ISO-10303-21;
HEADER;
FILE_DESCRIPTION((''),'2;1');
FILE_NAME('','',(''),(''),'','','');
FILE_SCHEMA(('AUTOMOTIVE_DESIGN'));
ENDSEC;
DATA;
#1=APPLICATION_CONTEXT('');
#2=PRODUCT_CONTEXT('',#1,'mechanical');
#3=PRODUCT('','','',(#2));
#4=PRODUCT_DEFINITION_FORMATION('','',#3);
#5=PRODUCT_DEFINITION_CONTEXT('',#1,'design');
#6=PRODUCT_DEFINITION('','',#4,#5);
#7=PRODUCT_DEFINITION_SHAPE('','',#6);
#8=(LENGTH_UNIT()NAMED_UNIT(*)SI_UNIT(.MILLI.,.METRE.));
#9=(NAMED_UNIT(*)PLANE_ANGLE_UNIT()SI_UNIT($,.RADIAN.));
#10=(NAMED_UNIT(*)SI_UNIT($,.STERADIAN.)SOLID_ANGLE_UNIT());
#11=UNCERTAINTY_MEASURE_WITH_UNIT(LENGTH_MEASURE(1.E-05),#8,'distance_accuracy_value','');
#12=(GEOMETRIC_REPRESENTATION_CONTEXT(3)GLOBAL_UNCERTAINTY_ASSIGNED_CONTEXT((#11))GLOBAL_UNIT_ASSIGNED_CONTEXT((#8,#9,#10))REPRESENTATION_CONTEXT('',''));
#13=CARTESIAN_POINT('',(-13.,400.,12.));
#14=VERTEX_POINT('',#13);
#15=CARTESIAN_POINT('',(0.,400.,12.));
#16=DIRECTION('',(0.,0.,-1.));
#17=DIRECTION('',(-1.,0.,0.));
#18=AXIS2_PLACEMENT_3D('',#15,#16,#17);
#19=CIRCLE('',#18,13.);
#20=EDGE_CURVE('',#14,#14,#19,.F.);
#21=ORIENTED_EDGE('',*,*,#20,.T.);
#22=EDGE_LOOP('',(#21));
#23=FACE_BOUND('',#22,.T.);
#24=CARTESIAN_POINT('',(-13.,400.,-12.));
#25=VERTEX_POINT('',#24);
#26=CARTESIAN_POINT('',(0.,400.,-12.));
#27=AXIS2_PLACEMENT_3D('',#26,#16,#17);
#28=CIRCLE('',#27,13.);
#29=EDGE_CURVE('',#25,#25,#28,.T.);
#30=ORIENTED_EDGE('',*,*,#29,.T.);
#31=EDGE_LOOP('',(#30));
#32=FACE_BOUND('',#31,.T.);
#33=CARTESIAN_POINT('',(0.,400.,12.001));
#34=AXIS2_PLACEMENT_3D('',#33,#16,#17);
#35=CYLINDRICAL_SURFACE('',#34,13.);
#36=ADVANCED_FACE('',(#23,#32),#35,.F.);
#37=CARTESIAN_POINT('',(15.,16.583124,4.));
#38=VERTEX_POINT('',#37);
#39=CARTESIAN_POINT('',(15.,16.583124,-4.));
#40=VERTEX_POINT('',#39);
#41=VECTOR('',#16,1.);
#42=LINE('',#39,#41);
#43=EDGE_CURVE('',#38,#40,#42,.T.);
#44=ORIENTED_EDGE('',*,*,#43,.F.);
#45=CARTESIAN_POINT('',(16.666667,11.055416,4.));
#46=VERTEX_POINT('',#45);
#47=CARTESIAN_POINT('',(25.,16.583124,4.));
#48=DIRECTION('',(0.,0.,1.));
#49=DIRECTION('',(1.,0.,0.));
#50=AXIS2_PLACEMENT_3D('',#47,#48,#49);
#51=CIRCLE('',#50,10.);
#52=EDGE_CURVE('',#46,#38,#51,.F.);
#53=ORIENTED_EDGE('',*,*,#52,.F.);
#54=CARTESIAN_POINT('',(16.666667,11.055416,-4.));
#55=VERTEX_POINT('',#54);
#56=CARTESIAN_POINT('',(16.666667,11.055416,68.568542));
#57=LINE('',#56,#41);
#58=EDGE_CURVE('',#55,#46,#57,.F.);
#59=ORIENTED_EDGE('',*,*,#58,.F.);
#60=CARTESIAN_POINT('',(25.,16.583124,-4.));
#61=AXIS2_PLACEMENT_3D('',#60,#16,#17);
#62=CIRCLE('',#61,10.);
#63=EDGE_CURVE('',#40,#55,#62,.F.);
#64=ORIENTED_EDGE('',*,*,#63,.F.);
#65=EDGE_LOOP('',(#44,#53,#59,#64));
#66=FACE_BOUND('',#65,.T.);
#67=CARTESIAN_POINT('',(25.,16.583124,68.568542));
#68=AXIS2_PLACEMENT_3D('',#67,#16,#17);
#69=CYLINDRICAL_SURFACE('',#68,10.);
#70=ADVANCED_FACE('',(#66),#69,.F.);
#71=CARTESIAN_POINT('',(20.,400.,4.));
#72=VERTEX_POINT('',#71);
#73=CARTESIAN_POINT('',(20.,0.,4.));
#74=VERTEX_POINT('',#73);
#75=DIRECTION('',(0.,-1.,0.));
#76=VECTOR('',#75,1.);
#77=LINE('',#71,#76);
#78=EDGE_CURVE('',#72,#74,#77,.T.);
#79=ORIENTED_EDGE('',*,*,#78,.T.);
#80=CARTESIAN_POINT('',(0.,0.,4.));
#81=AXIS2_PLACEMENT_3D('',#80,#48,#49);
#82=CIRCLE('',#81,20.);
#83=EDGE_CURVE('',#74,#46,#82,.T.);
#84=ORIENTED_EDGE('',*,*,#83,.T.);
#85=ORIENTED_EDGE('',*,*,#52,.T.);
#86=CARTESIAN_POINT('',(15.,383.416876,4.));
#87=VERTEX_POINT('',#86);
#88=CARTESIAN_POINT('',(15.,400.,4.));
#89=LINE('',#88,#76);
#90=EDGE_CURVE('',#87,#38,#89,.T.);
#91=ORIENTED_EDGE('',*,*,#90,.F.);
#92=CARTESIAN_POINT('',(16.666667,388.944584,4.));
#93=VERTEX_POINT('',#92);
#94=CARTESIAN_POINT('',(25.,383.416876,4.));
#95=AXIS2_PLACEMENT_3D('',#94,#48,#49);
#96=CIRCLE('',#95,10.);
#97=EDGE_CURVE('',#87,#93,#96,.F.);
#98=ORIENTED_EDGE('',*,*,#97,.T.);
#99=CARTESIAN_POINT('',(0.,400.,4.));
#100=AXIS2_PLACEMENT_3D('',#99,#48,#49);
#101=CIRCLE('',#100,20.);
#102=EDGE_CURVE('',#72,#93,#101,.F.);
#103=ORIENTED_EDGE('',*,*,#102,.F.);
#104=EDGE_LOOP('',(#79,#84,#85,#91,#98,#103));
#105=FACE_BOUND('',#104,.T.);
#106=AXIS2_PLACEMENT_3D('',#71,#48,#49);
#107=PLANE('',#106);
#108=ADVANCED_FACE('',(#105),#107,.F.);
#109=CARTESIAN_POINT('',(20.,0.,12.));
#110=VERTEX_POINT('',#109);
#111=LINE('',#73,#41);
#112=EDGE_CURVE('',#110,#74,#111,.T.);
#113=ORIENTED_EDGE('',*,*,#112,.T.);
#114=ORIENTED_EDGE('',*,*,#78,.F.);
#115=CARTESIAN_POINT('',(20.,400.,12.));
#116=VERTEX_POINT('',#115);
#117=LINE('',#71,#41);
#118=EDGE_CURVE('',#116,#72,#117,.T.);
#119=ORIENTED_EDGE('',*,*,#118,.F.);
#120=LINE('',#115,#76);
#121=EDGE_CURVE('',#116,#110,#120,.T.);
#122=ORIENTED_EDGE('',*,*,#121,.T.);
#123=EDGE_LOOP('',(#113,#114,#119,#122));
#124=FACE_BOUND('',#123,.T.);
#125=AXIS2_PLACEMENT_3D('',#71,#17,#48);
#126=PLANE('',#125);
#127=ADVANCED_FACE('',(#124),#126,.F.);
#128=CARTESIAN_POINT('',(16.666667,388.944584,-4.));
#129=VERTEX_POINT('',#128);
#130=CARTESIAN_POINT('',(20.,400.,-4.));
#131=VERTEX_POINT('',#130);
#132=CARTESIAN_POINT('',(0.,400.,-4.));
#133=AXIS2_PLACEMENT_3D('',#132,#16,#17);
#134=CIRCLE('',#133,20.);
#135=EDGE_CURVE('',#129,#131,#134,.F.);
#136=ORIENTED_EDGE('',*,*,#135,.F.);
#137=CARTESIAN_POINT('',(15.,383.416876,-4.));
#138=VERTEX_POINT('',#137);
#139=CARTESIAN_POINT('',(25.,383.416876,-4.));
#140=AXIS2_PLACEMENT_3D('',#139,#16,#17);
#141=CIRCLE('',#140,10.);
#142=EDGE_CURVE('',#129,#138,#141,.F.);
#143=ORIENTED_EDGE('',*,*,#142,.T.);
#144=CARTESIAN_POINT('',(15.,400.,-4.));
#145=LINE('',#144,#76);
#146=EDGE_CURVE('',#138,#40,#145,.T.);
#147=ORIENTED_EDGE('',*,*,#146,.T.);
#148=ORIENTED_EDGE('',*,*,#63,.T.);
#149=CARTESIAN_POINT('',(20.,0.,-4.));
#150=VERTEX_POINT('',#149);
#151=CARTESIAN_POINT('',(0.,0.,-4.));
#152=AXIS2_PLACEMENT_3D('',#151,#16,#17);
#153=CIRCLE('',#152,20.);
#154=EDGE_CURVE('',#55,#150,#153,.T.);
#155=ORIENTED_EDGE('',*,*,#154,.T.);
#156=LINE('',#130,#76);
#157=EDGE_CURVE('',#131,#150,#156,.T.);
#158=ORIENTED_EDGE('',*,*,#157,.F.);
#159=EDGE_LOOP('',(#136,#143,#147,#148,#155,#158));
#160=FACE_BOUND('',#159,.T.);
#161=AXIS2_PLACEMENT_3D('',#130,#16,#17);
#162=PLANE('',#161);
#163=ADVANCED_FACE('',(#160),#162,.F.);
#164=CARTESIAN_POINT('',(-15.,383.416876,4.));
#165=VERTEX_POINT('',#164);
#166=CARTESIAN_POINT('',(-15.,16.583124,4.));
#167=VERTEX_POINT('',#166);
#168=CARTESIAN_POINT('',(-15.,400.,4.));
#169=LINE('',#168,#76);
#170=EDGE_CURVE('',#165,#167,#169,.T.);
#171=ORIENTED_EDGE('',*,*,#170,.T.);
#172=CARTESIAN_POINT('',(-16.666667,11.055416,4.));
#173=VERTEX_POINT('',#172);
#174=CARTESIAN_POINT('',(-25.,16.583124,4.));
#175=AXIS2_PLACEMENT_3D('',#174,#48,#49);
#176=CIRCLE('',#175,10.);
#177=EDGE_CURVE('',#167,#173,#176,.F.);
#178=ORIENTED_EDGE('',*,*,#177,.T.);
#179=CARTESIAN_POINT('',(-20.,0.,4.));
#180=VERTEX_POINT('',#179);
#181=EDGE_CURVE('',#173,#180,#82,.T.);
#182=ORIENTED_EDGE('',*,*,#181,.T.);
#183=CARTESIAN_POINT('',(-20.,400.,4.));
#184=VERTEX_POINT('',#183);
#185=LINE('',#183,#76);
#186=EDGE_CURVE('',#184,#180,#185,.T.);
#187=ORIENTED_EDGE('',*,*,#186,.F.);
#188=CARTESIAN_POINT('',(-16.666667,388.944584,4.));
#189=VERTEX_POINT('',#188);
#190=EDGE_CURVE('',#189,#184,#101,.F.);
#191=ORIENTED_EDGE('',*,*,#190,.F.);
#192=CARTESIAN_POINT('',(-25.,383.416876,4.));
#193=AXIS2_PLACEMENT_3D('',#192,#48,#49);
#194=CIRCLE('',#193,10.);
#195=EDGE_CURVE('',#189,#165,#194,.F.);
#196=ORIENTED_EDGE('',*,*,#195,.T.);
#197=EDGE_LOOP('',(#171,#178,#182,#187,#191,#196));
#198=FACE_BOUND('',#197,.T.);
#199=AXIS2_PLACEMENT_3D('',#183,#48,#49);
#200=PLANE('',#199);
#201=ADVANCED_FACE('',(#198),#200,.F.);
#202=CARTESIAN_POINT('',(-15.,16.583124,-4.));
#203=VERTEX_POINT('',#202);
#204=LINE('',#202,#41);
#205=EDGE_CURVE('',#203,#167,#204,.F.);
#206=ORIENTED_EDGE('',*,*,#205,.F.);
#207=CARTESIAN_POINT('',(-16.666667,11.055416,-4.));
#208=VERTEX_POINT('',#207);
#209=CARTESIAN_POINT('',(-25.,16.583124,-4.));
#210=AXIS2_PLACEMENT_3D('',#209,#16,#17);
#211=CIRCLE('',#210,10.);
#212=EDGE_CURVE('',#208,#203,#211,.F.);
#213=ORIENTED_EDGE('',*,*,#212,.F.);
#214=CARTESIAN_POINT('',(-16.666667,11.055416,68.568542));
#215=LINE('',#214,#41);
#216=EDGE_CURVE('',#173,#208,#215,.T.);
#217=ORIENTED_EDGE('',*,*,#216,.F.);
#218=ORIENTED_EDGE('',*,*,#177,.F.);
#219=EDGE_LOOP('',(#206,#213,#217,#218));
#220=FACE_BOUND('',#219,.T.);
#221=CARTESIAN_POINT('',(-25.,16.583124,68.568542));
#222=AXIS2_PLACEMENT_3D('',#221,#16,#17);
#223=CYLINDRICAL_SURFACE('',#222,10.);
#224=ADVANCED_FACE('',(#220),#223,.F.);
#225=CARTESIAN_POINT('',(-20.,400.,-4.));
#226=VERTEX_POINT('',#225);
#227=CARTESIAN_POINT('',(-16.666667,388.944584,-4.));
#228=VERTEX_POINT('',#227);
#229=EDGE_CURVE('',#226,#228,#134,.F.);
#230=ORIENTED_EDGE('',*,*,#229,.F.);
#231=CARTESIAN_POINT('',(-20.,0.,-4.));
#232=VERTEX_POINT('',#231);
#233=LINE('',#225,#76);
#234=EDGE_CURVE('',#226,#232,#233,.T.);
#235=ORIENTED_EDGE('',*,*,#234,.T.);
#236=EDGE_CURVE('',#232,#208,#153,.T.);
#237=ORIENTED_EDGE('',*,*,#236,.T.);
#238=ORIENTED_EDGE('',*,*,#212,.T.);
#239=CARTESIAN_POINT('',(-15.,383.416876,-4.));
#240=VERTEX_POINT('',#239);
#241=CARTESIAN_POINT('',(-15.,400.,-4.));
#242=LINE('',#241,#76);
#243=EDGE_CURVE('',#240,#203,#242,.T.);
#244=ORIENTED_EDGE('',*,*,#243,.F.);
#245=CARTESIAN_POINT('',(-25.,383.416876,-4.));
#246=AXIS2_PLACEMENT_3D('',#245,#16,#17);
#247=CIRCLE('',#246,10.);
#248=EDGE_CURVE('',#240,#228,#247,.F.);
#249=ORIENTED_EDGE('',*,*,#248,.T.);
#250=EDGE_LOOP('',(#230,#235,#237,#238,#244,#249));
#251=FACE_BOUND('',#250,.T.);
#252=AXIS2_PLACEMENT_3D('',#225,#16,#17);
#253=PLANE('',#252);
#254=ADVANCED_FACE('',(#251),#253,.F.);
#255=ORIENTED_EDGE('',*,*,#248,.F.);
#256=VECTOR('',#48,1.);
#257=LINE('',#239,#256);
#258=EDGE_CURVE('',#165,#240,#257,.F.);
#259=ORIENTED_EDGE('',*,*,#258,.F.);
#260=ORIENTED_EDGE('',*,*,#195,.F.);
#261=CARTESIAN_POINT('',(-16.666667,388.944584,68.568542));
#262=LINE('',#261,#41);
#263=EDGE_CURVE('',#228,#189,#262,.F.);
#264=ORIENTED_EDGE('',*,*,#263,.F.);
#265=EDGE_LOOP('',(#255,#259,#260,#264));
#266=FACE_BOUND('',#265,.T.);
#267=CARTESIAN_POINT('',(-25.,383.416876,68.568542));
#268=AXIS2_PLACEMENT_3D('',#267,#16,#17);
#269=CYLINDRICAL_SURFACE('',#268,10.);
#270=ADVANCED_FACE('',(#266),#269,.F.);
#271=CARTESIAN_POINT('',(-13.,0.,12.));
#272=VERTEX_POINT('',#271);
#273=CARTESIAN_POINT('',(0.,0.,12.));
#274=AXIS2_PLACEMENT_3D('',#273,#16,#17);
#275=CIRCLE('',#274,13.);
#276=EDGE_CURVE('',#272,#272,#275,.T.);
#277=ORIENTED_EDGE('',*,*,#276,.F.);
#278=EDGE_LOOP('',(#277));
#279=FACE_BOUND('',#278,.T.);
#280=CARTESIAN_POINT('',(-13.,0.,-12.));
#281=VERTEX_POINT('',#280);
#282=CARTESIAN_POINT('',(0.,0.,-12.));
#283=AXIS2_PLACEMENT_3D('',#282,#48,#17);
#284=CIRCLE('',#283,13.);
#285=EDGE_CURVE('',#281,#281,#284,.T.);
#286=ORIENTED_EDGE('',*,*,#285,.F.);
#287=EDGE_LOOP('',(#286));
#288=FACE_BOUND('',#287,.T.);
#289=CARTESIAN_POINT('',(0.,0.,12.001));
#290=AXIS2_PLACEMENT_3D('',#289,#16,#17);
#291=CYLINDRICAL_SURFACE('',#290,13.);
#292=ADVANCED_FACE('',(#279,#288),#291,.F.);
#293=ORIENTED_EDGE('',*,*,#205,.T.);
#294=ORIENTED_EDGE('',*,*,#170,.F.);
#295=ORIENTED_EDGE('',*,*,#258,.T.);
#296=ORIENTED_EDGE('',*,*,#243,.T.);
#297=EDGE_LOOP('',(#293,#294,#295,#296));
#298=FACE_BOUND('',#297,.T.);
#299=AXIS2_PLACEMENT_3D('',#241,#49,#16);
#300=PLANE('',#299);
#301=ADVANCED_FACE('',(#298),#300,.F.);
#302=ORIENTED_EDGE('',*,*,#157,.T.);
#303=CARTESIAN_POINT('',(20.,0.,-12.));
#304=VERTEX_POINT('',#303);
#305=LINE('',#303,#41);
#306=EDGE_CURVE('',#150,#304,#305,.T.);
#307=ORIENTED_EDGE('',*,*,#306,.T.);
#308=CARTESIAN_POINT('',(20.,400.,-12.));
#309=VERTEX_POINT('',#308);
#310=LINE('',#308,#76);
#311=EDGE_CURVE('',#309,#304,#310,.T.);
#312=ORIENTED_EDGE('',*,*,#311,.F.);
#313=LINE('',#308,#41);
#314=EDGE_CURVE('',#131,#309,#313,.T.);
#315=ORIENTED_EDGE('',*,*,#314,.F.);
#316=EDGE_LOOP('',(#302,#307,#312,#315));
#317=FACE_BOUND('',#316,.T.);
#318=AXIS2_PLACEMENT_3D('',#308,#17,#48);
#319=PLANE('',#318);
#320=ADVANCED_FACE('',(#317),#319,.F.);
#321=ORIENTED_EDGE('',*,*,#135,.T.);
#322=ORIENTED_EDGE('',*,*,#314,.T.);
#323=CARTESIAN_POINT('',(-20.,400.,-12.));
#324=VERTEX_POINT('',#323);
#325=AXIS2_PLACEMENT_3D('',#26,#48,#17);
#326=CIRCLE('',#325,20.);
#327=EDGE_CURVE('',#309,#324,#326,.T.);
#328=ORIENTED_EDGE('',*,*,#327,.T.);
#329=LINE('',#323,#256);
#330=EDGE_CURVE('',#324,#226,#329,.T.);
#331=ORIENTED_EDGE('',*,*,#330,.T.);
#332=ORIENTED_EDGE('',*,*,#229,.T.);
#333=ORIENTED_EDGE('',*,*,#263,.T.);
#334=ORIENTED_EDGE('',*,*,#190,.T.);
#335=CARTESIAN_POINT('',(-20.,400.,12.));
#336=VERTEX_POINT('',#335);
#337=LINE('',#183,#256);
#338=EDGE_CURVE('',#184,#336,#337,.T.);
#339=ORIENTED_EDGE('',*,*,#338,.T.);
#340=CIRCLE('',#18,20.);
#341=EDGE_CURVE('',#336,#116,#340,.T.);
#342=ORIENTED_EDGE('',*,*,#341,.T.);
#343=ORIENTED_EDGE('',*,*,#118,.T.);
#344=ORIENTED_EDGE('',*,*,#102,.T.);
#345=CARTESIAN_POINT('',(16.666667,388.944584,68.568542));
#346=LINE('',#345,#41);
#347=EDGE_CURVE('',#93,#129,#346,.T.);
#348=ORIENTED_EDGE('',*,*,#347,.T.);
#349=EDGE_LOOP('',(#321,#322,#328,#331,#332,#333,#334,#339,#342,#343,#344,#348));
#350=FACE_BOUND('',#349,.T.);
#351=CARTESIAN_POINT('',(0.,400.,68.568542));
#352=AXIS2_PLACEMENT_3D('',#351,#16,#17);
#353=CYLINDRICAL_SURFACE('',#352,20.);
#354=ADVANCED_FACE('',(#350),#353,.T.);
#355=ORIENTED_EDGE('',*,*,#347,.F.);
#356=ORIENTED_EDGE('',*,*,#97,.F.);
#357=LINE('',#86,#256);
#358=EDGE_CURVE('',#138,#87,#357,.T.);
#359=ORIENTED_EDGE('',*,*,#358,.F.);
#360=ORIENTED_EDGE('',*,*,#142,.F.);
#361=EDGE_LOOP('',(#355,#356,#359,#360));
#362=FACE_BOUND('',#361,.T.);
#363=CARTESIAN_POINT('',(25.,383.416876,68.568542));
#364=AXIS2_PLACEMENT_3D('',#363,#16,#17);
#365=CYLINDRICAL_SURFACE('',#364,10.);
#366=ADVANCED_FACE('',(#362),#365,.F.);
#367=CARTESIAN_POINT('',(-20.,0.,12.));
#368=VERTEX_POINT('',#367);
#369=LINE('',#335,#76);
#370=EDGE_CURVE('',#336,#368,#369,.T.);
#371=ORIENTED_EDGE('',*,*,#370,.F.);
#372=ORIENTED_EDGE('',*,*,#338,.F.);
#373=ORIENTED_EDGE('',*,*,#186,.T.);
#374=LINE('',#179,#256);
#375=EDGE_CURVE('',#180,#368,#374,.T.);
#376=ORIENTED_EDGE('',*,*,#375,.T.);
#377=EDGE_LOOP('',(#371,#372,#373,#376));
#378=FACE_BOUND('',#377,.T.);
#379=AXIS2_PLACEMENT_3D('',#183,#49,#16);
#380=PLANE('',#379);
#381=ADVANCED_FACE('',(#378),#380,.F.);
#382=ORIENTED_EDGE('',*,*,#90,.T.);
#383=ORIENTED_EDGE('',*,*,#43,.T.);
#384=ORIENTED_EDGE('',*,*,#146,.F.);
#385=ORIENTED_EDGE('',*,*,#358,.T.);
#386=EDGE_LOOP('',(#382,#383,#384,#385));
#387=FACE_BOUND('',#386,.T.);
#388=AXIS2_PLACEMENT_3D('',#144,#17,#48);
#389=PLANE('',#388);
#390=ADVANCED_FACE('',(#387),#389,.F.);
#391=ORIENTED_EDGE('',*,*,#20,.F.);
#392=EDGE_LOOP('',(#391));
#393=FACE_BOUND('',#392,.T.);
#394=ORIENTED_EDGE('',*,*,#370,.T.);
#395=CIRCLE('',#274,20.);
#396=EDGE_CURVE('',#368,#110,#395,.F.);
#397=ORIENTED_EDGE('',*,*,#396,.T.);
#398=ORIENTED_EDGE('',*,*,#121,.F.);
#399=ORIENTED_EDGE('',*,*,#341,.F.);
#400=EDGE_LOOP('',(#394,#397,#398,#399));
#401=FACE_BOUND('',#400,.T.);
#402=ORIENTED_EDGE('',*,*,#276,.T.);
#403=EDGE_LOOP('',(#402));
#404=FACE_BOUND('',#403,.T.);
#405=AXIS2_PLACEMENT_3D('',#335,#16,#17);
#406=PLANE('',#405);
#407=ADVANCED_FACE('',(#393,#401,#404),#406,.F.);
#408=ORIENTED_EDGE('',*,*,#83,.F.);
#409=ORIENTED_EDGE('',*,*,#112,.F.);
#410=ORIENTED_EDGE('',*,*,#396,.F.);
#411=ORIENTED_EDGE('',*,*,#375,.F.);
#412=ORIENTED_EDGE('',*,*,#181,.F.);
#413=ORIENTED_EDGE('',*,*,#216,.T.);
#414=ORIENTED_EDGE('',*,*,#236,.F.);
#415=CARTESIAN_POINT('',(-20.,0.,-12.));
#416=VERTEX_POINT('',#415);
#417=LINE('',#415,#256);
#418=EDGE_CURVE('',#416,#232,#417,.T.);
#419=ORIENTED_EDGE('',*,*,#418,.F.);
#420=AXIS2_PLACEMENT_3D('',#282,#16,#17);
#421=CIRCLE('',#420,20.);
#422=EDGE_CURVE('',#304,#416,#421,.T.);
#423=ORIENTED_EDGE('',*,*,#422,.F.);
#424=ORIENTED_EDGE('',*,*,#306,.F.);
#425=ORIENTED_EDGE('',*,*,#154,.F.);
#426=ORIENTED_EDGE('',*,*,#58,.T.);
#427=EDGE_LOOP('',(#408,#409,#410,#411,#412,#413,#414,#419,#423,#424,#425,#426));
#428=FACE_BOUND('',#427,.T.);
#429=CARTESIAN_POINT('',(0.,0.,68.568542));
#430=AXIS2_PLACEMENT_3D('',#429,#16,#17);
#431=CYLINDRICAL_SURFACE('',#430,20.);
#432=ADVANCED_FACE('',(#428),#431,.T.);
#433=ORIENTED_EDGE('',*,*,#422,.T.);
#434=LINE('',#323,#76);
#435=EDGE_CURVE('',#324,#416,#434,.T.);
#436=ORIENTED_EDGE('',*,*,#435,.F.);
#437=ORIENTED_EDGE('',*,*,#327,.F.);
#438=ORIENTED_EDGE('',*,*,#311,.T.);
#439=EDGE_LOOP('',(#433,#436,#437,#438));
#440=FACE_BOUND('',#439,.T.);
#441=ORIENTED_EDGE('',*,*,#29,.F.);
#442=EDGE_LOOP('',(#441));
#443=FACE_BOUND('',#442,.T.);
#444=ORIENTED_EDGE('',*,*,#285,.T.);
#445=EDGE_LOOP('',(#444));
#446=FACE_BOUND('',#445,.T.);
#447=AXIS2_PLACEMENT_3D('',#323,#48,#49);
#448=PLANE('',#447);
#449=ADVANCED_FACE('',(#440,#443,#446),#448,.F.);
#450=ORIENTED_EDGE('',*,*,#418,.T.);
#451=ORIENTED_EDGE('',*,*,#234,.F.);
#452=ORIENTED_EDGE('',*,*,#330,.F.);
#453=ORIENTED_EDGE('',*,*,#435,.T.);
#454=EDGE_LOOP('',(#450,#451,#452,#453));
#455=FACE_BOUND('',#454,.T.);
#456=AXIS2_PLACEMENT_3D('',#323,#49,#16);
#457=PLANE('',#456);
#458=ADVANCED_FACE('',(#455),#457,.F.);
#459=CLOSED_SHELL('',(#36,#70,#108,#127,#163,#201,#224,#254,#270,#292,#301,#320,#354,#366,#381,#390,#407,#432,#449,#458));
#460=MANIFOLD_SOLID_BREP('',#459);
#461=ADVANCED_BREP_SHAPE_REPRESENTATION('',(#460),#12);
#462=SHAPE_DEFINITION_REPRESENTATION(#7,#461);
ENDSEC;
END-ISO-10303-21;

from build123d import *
from build123d.topology import SkipClean

# Parameters (mm, degrees)
BOSS_EXTRUDE1_DEPTH = 400
BOSS_EXTRUDE2_REACH = 403.218
SKETCH2_R           = 20
FILLET1_R           = 10
CUT_EXTRUDE1_REACH  = 423.16
SKETCH3_R           = 13


with BuildPart() as part:
    # Sketch1 → Boss-Extrude1 (new body)
    with BuildSketch(Plane(origin=(0, 0, 0), x_dir=(1, 0, 0), z_dir=(0, 1, 0))):
        Polygon((-20, 12), (20, 12), (20, 4), (15, 4), (15, -4), (20, -4), (20, -12), (-20, -12), (-20, -4), (-15, -4), (-15, 4), (-20, 4), align=None)
    extrude(amount=BOSS_EXTRUDE1_DEPTH)

    # Boss-Extrude2: up to this face of the body (flat: up to its plane)
    boss_extrude2_end = Plane(part.part.faces().sort_by_distance((0, 200, 12))[0])
    # Sketch2 → Boss-Extrude2 (add, up to the picked face)
    with BuildSketch(Plane(origin=(0, 0, -12), x_dir=(-1, 0, 0), z_dir=(0, 0, -1)), mode=Mode.PRIVATE) as boss_extrude2_sk1:
        Circle(SKETCH2_R)
    boss_extrude2_tool1 = split(extrude(boss_extrude2_sk1.sketch, amount=-BOSS_EXTRUDE2_REACH, mode=Mode.PRIVATE), bisect_by=boss_extrude2_end, keep=Keep.BOTH, mode=Mode.PRIVATE)
    boss_extrude2 = boss_extrude2_tool1.solids().sort_by(Axis((0, 0, -12), (0, 0, 1)))[0]
    add(boss_extrude2)

    # Mirror1: Boss-Extrude2 across plane
    with SkipClean():  # the faces are left unmerged after this step: merging them gives an invalid solid
        add(boss_extrude2.mirror(Plane.ZX.offset(200)))
    add(part.part.scale(1), mode=Mode.REPLACE)  # the faces are merged on a copy

    # Fillet1
    fillet1_edges = [part.edges().sort_by_distance(p)[0] for p in [
        (15, 13.228756555, 0),
        (-15, 13.228756555, 0),
        (-15, 386.771243445, 0),
        (15, 386.771243445, 0),
    ]]
    fillet(fillet1_edges, radius=FILLET1_R)

    # Sketch3 → Cut-Extrude1 (cut, up to next)
    with BuildSketch(Plane(origin=(0, 0, -12), x_dir=(-1, 0, 0), z_dir=(0, 0, -1)), mode=Mode.PRIVATE) as cut_extrude1_sk1:
        with Locations((0, 400)):
            Circle(SKETCH3_R)
    cut_extrude1_tool1 = extrude(cut_extrude1_sk1.sketch, amount=-CUT_EXTRUDE1_REACH, mode=Mode.PRIVATE) & part.part
    cut_extrude1 = cut_extrude1_tool1.solids().sort_by_distance((0, 400, -12))[0]
    add(cut_extrude1, mode=Mode.SUBTRACT)

    # Mirror2: Cut-Extrude1 across plane
    add(cut_extrude1.mirror(Plane.ZX.offset(200)), mode=Mode.SUBTRACT)


solid = part.part
